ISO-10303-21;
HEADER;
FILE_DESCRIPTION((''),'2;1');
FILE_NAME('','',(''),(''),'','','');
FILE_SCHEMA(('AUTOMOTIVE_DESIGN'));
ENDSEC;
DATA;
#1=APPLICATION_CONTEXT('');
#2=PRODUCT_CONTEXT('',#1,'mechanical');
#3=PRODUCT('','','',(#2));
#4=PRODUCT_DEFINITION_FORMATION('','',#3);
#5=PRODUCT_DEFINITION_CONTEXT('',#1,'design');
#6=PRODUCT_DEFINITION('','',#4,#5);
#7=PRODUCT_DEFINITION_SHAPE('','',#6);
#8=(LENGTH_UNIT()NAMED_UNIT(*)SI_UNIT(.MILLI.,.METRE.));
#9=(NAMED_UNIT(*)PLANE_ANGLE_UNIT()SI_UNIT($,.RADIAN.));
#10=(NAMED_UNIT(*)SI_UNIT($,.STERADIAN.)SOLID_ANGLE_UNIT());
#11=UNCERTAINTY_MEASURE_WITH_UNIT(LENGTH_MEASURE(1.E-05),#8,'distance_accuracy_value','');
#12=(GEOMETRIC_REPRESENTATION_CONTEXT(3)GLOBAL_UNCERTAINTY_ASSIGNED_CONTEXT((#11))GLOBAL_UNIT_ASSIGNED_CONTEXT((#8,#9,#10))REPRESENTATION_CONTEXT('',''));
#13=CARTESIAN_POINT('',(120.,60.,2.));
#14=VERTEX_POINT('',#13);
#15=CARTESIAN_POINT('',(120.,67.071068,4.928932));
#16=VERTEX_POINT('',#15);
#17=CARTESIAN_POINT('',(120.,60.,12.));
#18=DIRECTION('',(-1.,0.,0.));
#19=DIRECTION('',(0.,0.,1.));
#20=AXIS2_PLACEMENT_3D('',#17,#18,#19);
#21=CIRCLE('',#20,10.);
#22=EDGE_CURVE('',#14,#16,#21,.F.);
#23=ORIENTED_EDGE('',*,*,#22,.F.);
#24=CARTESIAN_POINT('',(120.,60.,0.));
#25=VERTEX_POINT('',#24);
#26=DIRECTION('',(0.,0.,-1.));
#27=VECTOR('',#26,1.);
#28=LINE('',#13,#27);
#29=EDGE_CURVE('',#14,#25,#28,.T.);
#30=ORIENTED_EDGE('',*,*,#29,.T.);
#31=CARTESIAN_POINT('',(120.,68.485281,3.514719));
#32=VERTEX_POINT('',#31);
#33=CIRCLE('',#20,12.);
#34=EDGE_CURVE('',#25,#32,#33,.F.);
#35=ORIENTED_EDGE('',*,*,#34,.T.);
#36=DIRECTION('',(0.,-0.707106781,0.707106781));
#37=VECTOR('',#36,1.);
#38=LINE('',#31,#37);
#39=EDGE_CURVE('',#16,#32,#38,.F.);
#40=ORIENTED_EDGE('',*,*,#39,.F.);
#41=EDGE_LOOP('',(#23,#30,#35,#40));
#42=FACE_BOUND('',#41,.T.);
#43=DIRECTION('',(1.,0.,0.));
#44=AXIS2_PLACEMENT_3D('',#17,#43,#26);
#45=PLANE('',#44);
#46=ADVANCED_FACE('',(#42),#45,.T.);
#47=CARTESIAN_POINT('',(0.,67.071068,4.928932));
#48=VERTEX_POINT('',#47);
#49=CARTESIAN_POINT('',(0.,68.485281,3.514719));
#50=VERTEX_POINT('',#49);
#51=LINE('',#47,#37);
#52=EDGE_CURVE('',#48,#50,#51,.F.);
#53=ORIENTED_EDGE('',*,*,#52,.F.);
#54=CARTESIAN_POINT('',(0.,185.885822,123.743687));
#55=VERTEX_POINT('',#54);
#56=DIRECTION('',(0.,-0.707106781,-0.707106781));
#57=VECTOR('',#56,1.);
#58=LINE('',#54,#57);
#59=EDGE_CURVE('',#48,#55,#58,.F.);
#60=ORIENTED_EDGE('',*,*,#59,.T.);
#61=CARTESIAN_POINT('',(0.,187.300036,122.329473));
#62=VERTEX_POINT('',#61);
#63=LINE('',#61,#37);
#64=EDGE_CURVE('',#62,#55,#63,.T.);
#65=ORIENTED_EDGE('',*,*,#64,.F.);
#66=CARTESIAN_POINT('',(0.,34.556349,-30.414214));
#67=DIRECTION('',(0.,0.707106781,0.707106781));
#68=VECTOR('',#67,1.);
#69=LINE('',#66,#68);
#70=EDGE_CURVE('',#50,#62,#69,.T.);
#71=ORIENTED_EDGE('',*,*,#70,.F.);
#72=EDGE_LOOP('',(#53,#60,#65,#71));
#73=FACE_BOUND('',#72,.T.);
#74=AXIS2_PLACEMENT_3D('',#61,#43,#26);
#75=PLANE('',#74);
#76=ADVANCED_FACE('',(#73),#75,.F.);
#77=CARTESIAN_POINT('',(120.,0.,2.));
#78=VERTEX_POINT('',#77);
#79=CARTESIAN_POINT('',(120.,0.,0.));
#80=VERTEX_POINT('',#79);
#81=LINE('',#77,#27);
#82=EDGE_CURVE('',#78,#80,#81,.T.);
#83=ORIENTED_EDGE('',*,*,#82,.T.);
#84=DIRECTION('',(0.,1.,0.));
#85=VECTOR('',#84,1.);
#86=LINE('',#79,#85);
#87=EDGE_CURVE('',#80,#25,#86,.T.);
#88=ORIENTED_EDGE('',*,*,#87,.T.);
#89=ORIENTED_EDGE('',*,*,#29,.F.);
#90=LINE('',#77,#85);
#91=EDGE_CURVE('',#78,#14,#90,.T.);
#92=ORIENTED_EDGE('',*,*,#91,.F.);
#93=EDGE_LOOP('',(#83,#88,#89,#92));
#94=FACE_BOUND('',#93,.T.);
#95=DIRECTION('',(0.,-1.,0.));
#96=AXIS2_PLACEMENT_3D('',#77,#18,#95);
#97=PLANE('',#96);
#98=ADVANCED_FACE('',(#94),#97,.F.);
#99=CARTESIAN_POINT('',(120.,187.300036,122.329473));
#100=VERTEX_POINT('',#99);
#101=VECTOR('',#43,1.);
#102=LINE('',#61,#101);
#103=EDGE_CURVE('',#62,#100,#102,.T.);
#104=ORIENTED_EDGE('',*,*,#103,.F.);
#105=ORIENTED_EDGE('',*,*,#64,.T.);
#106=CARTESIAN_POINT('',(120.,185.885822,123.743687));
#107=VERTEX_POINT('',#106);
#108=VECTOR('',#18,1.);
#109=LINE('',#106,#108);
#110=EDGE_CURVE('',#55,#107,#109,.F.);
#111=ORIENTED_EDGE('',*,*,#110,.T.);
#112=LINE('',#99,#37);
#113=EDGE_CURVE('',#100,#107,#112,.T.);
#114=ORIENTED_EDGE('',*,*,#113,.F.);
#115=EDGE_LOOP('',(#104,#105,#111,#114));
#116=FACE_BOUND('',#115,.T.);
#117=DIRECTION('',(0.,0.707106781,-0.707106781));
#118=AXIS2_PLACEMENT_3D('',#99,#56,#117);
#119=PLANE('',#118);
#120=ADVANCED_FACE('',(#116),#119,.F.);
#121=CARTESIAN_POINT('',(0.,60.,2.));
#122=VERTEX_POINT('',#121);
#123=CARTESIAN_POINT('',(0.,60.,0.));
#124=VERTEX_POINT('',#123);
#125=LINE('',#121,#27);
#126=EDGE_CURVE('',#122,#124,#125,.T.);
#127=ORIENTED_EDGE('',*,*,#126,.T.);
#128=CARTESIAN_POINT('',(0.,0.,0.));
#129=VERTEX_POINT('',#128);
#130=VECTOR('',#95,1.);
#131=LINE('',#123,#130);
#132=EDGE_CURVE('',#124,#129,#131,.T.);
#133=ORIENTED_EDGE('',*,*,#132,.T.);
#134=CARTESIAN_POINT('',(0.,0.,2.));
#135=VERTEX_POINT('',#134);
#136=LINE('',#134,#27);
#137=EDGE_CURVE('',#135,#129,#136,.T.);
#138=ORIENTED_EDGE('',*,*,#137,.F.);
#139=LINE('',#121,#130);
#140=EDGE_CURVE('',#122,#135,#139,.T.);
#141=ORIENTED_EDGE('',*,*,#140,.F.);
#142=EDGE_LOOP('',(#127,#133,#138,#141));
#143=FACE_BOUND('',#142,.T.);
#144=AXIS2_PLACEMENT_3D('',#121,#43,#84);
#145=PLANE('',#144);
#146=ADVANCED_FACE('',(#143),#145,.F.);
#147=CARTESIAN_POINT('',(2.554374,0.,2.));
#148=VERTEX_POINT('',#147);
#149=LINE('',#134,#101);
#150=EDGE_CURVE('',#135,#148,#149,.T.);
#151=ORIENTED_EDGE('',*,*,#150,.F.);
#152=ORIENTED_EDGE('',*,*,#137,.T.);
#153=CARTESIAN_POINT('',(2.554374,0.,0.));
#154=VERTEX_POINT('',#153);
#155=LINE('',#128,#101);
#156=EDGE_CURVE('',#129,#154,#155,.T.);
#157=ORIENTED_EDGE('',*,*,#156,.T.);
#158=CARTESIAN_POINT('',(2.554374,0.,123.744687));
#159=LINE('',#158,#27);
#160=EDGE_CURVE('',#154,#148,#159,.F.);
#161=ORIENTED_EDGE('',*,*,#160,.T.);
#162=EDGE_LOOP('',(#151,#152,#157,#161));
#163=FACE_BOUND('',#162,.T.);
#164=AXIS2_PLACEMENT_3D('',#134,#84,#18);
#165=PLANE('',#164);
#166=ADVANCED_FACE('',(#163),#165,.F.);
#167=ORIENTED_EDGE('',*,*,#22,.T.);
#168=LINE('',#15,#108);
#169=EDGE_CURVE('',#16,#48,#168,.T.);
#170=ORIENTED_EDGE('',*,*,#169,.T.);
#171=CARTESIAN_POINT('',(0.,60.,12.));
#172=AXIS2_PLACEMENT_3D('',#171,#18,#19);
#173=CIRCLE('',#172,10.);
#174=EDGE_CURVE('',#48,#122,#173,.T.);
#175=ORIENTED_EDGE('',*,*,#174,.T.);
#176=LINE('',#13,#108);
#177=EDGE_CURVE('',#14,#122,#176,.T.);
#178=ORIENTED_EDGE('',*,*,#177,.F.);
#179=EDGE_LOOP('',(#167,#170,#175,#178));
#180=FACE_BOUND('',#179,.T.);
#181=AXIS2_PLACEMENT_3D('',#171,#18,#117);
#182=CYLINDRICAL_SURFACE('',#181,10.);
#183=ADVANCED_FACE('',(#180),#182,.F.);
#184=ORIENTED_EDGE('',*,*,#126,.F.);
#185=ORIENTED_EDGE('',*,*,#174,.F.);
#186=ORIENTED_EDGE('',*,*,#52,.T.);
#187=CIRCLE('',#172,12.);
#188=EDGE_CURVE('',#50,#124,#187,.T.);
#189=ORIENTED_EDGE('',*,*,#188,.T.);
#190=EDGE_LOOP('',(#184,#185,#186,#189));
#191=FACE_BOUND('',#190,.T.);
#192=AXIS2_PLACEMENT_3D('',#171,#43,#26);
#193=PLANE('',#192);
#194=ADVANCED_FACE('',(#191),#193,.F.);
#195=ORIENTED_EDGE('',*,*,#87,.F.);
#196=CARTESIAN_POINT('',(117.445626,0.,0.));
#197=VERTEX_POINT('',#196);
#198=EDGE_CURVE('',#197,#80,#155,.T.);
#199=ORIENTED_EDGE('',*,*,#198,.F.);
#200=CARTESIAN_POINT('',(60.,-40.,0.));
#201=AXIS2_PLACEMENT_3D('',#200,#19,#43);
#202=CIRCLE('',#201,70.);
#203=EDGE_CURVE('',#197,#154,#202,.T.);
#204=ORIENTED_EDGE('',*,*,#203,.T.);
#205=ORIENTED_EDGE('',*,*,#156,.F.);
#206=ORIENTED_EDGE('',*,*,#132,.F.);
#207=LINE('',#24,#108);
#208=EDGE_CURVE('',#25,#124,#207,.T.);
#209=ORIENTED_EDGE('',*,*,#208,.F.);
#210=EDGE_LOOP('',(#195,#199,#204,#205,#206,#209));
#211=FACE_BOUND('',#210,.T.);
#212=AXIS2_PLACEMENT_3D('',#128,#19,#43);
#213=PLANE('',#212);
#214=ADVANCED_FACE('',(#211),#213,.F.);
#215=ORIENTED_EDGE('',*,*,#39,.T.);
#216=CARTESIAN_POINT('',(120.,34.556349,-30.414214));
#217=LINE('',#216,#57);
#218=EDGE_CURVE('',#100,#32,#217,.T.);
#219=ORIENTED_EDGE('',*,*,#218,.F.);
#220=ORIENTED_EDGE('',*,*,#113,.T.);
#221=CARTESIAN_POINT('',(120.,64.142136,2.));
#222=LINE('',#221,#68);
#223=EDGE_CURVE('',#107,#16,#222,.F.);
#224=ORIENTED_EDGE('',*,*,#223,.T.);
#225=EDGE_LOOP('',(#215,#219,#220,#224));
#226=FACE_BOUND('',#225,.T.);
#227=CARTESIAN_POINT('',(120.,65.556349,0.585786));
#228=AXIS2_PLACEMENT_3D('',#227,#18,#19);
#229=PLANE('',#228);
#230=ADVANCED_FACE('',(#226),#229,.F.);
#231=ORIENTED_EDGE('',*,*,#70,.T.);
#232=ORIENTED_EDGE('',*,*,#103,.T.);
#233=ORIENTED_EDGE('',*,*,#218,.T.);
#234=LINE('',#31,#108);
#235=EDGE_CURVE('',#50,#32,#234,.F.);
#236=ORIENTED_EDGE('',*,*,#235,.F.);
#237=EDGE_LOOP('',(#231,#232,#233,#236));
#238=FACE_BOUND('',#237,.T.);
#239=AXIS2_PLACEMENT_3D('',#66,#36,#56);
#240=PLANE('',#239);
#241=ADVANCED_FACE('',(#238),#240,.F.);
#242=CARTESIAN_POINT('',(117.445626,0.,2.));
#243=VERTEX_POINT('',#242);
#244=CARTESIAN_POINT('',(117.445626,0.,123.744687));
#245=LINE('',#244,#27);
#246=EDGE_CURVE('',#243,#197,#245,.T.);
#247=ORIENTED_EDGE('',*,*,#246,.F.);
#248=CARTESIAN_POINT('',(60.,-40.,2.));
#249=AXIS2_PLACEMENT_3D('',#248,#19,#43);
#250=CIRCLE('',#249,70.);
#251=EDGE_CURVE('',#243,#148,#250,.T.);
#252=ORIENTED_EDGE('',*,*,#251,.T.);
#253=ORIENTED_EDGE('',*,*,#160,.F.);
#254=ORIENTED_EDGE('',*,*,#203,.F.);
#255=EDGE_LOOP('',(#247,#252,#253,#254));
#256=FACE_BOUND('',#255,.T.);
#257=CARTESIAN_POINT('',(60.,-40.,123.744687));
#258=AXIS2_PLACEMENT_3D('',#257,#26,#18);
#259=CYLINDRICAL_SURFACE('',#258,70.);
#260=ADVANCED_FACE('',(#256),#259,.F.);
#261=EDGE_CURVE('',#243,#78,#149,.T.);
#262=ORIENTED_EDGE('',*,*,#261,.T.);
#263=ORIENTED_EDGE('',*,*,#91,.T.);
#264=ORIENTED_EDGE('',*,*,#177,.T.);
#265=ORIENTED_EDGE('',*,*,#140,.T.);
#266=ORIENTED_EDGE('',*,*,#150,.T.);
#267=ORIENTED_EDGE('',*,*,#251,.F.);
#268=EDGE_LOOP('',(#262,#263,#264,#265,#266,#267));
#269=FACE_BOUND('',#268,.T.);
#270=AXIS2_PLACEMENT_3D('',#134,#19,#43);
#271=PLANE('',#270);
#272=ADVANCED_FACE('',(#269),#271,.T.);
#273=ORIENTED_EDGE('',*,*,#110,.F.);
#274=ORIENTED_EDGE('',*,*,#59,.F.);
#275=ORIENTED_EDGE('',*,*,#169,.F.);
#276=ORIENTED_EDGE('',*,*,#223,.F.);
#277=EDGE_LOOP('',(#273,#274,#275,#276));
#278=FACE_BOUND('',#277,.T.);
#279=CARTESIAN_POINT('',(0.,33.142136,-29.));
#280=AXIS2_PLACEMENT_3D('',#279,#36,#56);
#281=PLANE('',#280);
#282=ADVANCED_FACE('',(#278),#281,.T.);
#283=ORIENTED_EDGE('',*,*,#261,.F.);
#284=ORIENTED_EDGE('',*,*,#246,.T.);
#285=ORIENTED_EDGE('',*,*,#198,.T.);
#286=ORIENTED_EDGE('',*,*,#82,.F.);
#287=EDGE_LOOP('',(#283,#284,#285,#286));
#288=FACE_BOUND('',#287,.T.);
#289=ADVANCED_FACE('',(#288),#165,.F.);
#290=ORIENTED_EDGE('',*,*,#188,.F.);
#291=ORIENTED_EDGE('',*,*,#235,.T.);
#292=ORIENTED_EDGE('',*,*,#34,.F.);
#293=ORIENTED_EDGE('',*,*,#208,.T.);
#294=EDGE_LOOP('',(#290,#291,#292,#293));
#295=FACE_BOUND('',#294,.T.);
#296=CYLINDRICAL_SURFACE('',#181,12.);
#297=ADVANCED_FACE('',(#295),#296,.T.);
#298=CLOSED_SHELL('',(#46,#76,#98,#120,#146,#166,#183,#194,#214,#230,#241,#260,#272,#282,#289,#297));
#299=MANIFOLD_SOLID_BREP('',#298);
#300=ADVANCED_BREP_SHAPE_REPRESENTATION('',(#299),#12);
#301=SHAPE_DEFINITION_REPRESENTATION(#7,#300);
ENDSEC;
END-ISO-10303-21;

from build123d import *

# Parameters (mm, degrees)
SKETCH_2_W             = 120
SKETCH_2_H             = 60
SM_BASE_FLANGE_1_DEPTH = 2
SM_EDGE_FLANGE_1_DEPTH = 120
CUT_EXTRUDE_3_REACH    = 256.546
SKETCH_3_R             = 70


# Sheet-metal steps are written as plain solids
with BuildPart() as part:
    # Sketch 2 → Базовая кромка1 (new body)
    with BuildSketch(Plane.XY):
        with Locations((60, 30)):
            Rectangle(SKETCH_2_W, SKETCH_2_H)
    extrude(amount=SM_BASE_FLANGE_1_DEPTH)

    # Ребро-кромка1 section (across the edge) → Ребро-кромка1 (add)
    with BuildSketch(Plane(origin=(120, 64.142135624, 2), x_dir=(0, -0.7071067811865438, 0.7071067811865512), z_dir=(-1, 0, 0))):
        with BuildLine():
            Line((-2, 4.142135624), (-2, 172.171572875))
            Line((-2, 172.171572875), (0, 172.171572875))
            Line((0, 172.171572875), (0, 4.142135624))
            ThreePointArc((0, 4.142135624), (0.761204675, 0.3153013), (2.928932188, -2.928932188))
            Line((2.928932188, -2.928932188), (1.514718626, -4.343145751))
            ThreePointArc((1.514718626, -4.343145751), (-1.08655439, -0.450065565), (-2, 4.142135624))
        make_face()
    extrude(amount=SM_EDGE_FLANGE_1_DEPTH)

    # Эскиз3 → Вырез-Вытянуть3 (cut, up to next)
    with BuildSketch(Plane.XY, mode=Mode.PRIVATE) as cut_extrude_3_sk1:
        with Locations((60, -40)):
            Circle(SKETCH_3_R)
    cut_extrude_3_tool1 = extrude(cut_extrude_3_sk1.sketch, amount=CUT_EXTRUDE_3_REACH, mode=Mode.PRIVATE) & part.part
    add(cut_extrude_3_tool1.solids().sort_by_distance((60, -40, 0))[0], mode=Mode.SUBTRACT)


solid = part.part
